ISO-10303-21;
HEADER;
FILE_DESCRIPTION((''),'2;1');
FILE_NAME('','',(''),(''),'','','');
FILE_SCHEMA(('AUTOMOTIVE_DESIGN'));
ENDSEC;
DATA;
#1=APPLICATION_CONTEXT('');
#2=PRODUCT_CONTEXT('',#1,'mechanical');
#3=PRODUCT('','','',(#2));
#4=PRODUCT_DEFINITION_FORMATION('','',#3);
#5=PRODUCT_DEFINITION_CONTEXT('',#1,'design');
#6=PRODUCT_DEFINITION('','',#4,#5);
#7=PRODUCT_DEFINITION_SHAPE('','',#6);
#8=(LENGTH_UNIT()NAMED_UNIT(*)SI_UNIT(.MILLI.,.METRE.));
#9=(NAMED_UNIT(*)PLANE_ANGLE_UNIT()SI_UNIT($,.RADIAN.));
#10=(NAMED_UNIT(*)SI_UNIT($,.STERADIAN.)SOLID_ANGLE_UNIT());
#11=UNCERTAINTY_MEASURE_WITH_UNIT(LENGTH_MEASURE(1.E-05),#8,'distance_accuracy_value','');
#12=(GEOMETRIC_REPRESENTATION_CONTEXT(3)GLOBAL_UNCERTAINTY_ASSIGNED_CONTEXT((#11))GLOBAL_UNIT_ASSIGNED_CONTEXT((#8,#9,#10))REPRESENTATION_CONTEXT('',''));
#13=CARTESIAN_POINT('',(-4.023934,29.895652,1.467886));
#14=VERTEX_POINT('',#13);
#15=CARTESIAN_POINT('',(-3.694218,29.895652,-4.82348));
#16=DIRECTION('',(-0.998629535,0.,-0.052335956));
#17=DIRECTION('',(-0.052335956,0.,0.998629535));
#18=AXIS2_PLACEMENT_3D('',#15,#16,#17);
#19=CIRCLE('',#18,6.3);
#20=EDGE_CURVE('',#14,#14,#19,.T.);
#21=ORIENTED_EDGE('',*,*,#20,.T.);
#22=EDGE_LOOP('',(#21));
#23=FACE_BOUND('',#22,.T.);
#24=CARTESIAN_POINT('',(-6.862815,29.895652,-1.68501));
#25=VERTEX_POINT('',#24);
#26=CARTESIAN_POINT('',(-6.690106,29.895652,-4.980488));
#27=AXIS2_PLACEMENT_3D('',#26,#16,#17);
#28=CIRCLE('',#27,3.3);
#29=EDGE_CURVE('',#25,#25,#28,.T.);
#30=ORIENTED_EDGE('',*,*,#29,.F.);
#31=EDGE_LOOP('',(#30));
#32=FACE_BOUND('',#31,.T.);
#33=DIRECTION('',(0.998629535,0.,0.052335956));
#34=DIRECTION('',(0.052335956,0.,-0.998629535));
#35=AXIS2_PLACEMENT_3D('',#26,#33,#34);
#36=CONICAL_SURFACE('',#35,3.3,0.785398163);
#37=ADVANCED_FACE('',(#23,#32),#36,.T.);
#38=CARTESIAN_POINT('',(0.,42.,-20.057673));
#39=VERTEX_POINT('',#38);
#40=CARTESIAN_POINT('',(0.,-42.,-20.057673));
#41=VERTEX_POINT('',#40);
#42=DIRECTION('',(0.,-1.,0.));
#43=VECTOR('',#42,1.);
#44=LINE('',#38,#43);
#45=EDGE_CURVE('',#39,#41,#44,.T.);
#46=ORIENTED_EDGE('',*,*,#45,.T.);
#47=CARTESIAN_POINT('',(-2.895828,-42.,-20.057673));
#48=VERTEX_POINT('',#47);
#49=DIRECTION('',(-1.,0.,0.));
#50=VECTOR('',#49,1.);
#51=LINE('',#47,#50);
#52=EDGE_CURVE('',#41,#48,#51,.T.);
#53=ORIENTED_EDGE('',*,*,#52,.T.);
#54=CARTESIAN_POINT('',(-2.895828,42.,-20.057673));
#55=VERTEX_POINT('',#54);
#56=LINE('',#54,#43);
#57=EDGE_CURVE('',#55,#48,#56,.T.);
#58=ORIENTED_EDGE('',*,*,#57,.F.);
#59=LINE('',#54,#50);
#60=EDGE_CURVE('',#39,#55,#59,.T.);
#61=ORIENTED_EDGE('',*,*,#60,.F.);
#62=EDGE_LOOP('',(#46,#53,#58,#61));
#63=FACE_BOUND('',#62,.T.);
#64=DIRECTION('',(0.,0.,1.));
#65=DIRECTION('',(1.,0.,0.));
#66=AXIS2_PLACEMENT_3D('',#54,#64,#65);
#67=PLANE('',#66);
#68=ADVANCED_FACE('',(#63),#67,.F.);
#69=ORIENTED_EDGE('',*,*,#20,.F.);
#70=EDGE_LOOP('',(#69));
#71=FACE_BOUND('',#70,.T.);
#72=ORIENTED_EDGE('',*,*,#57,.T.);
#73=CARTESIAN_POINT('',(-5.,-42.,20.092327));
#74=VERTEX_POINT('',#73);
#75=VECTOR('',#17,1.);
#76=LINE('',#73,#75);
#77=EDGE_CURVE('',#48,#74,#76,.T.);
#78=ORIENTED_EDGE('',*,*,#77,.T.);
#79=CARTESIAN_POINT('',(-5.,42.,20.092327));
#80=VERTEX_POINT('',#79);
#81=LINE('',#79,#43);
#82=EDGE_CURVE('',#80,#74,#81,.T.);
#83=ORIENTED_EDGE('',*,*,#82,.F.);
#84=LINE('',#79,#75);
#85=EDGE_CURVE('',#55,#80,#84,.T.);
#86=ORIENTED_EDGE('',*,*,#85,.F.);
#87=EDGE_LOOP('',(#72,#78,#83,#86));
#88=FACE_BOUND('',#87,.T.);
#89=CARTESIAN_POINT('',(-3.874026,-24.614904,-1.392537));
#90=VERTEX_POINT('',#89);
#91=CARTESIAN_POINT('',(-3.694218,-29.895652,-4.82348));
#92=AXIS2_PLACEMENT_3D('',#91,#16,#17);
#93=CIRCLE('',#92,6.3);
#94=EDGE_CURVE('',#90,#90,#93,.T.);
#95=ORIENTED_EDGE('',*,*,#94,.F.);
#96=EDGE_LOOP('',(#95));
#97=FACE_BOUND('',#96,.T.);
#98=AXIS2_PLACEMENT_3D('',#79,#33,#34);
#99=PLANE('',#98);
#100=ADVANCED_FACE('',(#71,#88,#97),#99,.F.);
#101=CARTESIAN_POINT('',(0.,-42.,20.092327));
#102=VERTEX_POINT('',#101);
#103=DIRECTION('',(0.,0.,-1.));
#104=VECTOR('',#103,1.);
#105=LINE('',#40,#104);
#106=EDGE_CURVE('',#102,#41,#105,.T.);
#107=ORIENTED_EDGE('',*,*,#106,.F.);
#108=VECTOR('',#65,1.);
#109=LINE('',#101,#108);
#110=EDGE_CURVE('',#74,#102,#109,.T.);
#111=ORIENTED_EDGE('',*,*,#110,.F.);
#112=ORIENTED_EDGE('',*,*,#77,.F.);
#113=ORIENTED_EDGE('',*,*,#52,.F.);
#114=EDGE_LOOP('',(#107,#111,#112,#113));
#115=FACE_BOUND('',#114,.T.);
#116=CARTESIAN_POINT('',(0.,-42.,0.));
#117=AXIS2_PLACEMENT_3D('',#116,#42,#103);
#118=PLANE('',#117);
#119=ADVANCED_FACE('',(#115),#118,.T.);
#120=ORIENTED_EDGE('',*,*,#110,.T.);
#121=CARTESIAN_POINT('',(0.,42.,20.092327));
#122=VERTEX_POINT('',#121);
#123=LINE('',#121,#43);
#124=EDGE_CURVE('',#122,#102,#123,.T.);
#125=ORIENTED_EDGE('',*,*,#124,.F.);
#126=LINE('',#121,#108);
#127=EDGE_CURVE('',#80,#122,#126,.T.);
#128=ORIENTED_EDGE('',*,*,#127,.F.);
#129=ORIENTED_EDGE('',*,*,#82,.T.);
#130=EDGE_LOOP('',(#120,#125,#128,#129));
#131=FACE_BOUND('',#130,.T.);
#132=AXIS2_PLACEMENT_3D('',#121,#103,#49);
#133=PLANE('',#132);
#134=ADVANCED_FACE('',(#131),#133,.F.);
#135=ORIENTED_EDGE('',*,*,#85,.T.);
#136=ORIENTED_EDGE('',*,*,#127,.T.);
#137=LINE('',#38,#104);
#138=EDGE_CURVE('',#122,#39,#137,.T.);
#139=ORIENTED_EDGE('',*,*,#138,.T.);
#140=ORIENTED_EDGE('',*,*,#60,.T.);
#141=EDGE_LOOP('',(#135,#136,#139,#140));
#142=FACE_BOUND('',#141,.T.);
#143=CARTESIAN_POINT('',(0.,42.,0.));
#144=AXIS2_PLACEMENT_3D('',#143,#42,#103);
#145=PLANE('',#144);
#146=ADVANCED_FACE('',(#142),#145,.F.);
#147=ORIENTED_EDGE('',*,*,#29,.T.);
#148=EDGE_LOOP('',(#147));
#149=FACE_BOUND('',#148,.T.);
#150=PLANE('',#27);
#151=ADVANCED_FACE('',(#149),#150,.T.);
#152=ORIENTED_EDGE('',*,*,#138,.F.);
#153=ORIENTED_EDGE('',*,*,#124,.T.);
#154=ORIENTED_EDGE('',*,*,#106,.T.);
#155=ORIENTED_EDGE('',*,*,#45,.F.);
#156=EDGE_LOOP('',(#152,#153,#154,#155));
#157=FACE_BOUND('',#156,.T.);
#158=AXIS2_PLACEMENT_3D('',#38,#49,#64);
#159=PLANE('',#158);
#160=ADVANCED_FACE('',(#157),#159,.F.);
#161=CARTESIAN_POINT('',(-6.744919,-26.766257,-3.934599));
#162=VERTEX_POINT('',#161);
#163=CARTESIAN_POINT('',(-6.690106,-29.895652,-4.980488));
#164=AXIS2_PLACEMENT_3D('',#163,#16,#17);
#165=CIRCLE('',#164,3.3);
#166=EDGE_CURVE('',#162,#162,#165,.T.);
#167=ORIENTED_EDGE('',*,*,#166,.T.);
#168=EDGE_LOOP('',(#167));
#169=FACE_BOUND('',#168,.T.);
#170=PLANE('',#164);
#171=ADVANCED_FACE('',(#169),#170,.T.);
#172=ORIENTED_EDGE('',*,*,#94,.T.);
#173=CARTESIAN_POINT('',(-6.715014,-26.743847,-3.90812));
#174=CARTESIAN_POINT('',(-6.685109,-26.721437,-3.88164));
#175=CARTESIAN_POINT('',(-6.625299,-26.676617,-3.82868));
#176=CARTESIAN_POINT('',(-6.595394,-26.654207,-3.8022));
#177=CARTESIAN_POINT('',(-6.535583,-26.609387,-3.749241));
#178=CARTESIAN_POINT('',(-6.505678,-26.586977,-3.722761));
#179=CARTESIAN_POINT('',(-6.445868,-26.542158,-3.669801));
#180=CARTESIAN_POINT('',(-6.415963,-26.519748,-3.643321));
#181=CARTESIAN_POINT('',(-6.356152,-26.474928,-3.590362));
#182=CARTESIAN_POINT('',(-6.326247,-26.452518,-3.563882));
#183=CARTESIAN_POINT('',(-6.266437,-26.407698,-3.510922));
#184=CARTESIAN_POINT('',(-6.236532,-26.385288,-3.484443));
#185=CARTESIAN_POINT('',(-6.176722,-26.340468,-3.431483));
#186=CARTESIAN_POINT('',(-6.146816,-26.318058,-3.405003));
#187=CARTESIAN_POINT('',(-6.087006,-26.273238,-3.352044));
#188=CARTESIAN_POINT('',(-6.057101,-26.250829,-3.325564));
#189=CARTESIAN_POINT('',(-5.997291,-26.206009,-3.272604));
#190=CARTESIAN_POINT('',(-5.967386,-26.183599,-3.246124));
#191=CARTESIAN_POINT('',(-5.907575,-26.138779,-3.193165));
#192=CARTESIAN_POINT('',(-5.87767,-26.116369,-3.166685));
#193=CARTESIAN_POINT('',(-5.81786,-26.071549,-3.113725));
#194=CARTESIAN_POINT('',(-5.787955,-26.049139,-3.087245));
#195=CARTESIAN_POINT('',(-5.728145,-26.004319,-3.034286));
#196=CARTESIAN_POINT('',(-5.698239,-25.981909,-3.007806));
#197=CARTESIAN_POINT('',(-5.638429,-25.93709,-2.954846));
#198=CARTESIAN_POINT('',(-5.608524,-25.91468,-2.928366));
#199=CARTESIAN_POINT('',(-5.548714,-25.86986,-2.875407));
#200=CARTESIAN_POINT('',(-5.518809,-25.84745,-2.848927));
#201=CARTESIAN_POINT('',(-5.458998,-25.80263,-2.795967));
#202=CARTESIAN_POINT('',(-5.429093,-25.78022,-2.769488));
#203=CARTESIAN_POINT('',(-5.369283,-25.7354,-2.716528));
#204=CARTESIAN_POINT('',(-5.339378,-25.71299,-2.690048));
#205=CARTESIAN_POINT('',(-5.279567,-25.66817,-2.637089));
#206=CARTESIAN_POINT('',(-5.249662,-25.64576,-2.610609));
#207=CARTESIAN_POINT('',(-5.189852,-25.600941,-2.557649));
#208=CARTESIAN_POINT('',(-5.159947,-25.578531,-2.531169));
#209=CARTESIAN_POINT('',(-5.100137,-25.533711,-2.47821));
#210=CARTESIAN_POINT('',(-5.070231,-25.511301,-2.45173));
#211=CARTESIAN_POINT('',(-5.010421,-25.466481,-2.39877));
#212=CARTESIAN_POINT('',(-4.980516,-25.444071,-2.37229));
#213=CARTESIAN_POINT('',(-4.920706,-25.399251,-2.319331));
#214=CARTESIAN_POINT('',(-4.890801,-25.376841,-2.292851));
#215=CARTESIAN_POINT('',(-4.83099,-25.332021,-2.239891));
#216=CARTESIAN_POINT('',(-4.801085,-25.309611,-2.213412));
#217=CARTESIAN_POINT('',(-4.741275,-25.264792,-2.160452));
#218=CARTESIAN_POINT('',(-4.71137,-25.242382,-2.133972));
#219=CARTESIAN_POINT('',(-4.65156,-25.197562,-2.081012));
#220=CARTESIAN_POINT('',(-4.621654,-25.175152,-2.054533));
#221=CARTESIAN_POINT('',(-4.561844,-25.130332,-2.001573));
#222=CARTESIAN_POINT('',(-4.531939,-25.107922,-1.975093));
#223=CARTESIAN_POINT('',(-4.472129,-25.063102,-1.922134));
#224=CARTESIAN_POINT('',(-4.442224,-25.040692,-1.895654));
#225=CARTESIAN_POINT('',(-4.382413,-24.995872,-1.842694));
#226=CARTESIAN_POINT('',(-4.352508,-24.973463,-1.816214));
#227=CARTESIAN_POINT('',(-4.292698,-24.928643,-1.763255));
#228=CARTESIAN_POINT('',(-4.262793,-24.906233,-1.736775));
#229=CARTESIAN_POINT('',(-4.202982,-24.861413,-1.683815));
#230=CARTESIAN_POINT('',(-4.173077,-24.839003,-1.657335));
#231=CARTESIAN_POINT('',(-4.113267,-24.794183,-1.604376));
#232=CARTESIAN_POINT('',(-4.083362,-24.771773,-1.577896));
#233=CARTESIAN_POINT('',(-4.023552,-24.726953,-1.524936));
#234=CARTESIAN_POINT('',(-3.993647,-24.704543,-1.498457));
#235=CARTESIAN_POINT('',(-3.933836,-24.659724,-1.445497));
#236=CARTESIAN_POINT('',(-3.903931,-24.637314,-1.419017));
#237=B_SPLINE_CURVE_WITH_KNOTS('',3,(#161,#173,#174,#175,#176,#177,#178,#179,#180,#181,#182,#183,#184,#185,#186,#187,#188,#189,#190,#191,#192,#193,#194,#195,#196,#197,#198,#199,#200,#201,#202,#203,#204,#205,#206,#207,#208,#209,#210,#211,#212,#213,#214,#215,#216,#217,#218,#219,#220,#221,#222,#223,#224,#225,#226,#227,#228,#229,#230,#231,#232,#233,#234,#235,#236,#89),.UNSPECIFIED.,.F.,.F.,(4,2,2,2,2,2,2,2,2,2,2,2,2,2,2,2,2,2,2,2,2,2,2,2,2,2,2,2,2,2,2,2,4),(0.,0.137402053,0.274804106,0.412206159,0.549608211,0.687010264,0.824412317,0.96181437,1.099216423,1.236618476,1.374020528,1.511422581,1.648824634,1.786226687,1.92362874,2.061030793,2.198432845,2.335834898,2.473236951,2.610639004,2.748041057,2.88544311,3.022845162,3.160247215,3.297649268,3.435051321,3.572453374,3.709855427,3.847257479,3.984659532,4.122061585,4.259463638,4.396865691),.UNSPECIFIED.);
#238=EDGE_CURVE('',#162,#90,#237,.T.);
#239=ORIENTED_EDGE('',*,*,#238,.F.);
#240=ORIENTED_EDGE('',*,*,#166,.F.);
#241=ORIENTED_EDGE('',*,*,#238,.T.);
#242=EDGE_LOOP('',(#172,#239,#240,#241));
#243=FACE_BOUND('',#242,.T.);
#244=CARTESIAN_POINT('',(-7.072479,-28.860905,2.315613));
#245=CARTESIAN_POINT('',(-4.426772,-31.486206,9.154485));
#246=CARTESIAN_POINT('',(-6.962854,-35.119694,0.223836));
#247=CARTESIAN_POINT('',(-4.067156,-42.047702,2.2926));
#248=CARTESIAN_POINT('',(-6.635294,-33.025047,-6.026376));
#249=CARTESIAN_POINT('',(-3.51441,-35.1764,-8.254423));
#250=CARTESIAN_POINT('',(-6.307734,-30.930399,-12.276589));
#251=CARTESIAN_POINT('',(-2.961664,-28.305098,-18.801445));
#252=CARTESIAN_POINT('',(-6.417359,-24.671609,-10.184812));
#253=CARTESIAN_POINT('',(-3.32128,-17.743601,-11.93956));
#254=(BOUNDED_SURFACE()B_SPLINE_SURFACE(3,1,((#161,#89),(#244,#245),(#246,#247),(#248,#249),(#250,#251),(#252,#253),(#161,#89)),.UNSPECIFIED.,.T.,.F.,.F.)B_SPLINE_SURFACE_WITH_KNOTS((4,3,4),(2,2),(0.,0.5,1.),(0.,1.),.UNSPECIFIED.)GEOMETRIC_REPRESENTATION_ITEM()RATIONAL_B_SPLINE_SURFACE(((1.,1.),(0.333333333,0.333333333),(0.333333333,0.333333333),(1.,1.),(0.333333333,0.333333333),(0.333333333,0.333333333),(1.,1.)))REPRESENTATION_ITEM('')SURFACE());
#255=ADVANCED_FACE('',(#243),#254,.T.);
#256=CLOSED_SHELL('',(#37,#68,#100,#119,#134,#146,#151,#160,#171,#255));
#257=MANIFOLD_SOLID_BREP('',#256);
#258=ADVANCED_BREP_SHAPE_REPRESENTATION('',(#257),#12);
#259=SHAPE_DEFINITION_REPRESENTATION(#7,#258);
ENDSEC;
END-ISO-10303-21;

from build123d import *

# Parameters (mm, degrees)
BOSS_EXTRUDE1_DEPTH = 42
SKETCH3_7_R         = 3.3
SKETCH2_6_R         = 6.3


with BuildPart() as part:
    # Sketch1 → Boss-Extrude1 (new, symmetric)
    with BuildSketch(Plane(origin=(0, 0, 0), x_dir=(1, 0, 0), z_dir=(0, 1, 0))):
        Polygon((0, 20.057673142), (0, -20.092326858), (-5, -20.092326858), (-2.895827662, 20.057673142), align=None)
    extrude(amount=BOSS_EXTRUDE1_DEPTH, both=True)

    # Loft2: read off the stored shape, not the designer's step
    # Loft2: loft between two sections, ruled curve by curve
    loft2_from = [
        Edge.make_bspline([(-6.744919191, -26.766256905, -3.934599382), (-7.072478945, -28.860904588, 2.315613069), (-6.962853556, -35.119694494, 0.223836028), (-6.635293801, -33.025046811, -6.026376424), (-6.307734047, -30.930399127, -12.276588875), (-6.417359436, -24.671609222, -10.184811834), (-6.744919191, -26.766256905, -3.934599382)], [0, 0, 0, 0, 0.5, 0.5, 0.5, 1, 1, 1, 1], 3, [1, 0.333333333, 0.333333333, 1, 0.333333333, 0.333333333, 1]),
    ]
    loft2_to = [
        Edge.make_bspline([(-3.874025978, -24.614903671, -1.39253736), (-4.42677199, -31.486205901, 9.154484851), (-4.067155817, -42.047702275, 2.292599502), (-3.514409805, -35.176400045, -8.254422709), (-2.961663793, -28.305097815, -18.801444919), (-3.321279966, -17.743601441, -11.93955957), (-3.874025978, -24.614903671, -1.39253736)], [0, 0, 0, 0, 0.5, 0.5, 0.5, 1, 1, 1, 1], 3, [1, 0.333333333, 0.333333333, 1, 0.333333333, 0.333333333, 1]),
    ]
    loft2 = Solid(Shell([*[Face.make_surface_from_curves(loft2_from[k], loft2_to[k]) for k in range(1)], Face(Wire(loft2_from)), Face(Wire(loft2_to))]))
    add(loft2)

    # Sketch3<7> → Loft3 section 0
    with BuildSketch(Plane(origin=(-6.932083318, 0, -0.363295092), x_dir=(-0.052335956242940435, 0, 0.998629534754574), z_dir=(-0.9986295347545742, 0, -0.052335956242940435))):
        with Locations((-4.623529197, 29.895651858)):
            Circle(SKETCH3_7_R)
    # Sketch2<6> → Loft3 section 1
    with BuildSketch(Plane(origin=(-3.936194713, 0, -0.206287224), x_dir=(-0.052335956242940435, 0, 0.998629534754574), z_dir=(-0.9986295347545742, 0, -0.052335956242940435))):
        with Locations((-4.623529197, 29.895651858)):
            Circle(SKETCH2_6_R)
    loft()


solid = part.part
